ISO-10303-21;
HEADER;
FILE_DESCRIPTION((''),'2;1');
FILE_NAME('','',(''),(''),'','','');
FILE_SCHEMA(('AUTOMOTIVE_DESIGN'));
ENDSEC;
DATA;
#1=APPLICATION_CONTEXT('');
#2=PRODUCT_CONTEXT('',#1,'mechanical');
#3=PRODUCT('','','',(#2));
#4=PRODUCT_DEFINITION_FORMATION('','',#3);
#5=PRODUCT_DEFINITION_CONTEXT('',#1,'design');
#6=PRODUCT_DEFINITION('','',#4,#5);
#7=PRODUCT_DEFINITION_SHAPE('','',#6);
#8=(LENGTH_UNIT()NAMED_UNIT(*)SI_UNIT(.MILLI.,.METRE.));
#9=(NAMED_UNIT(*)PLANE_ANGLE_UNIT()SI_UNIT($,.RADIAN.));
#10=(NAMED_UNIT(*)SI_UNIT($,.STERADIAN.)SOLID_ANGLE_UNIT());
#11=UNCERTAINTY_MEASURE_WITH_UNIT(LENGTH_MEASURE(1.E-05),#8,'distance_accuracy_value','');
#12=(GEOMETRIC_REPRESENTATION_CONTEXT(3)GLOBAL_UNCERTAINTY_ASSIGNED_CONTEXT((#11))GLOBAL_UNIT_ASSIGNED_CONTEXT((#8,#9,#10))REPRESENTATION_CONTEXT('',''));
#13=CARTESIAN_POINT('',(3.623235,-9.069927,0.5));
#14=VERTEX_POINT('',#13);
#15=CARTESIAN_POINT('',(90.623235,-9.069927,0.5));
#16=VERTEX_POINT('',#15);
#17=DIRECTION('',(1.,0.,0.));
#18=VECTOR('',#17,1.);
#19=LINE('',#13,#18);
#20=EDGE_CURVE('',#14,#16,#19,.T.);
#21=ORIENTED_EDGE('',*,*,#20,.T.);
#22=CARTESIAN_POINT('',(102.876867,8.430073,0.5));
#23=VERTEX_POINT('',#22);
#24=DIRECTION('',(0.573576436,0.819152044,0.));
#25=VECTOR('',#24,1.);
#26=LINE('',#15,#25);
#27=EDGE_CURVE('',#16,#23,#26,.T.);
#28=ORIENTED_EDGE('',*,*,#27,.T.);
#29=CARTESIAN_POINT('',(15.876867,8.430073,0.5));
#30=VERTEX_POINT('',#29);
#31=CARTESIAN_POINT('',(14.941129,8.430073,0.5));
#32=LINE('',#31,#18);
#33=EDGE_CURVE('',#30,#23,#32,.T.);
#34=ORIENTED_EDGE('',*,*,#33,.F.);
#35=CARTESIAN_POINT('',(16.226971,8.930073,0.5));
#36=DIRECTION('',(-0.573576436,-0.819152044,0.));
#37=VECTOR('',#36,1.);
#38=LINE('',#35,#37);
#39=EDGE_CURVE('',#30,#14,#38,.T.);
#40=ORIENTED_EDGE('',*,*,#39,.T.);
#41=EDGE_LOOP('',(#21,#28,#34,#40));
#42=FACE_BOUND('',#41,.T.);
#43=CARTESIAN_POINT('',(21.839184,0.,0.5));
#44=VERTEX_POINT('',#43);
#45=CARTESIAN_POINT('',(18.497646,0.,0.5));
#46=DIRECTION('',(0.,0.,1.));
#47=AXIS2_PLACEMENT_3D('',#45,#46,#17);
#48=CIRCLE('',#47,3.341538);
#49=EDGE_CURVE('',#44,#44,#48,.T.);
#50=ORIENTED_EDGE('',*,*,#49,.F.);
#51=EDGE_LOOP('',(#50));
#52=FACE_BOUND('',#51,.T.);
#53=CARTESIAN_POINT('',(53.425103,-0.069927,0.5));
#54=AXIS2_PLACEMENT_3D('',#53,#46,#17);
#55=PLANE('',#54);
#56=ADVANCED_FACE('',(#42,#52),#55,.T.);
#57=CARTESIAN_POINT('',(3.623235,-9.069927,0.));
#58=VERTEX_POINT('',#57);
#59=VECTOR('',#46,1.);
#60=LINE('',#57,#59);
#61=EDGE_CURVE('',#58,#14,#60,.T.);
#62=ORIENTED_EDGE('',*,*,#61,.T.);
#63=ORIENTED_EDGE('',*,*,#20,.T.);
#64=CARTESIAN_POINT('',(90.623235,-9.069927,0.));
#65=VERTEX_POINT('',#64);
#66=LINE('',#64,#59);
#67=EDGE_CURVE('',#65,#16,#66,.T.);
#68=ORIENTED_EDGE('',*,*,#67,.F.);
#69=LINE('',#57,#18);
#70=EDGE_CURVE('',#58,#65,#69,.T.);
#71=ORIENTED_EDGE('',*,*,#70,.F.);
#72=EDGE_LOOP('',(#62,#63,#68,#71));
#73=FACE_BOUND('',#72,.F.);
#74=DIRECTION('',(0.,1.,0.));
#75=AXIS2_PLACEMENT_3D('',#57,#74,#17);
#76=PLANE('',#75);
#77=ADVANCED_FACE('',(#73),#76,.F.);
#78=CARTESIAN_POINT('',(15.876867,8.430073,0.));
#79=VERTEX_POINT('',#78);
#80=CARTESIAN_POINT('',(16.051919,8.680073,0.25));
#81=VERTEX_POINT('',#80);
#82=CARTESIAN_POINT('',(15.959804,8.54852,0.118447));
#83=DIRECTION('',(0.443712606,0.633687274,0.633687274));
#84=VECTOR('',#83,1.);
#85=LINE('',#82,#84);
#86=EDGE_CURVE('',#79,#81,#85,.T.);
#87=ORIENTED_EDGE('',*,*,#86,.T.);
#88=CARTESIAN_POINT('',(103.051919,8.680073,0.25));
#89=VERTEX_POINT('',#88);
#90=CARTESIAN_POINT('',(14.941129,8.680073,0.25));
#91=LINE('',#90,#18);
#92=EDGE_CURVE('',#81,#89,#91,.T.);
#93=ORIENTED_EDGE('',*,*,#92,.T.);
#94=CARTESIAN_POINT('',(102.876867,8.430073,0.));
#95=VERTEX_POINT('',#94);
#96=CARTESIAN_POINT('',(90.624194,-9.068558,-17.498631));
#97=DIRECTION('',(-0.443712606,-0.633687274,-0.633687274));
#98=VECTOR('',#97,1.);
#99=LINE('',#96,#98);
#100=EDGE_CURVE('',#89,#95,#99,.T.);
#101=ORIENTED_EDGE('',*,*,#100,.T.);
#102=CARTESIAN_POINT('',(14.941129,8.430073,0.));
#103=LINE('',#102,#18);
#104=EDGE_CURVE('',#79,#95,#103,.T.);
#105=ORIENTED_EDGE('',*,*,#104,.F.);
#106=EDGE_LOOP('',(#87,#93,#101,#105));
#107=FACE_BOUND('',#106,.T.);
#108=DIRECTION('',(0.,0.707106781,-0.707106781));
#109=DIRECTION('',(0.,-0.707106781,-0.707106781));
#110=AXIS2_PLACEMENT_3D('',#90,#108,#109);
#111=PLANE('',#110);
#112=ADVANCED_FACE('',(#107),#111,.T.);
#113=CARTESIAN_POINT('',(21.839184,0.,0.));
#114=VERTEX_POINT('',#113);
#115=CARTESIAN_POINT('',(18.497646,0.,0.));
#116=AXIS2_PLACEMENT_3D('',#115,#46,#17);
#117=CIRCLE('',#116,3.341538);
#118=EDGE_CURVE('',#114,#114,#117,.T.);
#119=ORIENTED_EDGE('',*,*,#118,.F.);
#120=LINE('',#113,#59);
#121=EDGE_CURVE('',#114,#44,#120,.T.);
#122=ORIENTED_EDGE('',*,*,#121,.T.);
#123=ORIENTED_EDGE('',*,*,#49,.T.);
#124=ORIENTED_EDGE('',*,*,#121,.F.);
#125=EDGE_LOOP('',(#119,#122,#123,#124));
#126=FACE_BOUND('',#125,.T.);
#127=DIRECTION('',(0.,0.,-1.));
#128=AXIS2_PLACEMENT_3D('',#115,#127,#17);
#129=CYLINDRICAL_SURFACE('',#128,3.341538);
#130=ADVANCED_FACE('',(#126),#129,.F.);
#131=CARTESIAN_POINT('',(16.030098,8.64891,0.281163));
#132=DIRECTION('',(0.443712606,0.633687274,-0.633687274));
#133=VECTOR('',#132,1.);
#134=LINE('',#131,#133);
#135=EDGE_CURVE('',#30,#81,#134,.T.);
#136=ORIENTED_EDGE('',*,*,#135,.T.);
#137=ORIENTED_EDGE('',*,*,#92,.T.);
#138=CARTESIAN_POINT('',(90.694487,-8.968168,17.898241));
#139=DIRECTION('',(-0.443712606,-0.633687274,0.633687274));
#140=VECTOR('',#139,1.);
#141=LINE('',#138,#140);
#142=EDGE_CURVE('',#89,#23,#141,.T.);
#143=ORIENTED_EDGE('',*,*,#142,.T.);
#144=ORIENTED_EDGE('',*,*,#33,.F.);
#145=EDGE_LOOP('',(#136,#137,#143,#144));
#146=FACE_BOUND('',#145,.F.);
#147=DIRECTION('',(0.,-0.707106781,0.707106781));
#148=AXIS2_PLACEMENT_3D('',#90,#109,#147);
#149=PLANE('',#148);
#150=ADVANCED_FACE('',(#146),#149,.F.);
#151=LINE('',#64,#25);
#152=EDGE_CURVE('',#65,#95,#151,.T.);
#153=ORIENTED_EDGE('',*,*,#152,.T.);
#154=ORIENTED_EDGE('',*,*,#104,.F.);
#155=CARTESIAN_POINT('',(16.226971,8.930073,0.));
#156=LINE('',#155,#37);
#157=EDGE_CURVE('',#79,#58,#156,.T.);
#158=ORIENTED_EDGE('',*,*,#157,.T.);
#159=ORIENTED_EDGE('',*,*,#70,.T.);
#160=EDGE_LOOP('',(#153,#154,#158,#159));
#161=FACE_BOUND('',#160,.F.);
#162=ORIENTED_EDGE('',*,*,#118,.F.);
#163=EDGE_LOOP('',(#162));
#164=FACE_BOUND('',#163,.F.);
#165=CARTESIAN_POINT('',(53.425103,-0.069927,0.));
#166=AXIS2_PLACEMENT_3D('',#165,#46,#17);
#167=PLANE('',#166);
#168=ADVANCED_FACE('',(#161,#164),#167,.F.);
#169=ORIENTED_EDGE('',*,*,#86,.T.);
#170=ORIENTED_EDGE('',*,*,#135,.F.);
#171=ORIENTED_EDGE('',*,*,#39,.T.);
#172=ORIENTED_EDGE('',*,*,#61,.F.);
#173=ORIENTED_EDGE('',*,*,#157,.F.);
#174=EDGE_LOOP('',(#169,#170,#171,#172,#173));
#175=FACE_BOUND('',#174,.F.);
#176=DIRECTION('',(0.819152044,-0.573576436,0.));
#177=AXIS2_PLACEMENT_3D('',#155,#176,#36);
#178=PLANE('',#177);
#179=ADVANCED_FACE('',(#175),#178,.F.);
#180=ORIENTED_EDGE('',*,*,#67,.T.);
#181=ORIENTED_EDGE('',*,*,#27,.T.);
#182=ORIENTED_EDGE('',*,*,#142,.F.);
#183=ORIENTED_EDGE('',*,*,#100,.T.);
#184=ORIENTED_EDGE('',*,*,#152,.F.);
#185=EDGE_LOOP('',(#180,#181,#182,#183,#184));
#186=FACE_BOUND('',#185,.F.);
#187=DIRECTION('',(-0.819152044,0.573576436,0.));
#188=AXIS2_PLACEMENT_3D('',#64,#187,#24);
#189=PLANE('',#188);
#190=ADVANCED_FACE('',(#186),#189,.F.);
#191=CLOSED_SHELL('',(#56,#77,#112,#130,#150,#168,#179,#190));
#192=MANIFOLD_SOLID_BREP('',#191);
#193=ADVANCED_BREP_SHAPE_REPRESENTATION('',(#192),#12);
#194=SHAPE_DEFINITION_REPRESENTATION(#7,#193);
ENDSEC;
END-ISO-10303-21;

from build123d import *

# Parameters (mm, degrees)
F0_R        = 3.341537713
F1_DEPTH    = 0.5
F2_T1_DEPTH = 89.571682988


# Not quite as in the source:
# - a fillet or chamfer that OpenCascade refuses, or shapes differently, is made with other operations: its cross-section is extruded or revolved along the edge and cut away or added


with BuildPart() as f1:
    # F0 (on Top) → F1 (new body)
    with BuildSketch(Plane.XY):
        Polygon((16.2269707607, 8.9300729632), (3.6232350729, -9.0699270368), (90.6232350729, -9.0699270368), (103.2269707607, 8.9300729632), align=None)
        with Locations((18.4976458549, 0)):
            Circle(F0_R, mode=Mode.SUBTRACT)
    extrude(amount=F1_DEPTH)

    # F2: chamfer of 0.5 on 2 edges, made by hand

    # F2_s2 → F2_t1 (cut)
    with BuildSketch(Plane.YZ.offset(14.9411292667)):
        Polygon((8.9300729632, 0), (8.4300729632, 0.5), (8.9300729632, 0.5), align=None)
        Polygon((8.9300729632, 0.5), (8.4300729632, 0), (8.9300729632, 0), align=None)
    extrude(amount=F2_T1_DEPTH, mode=Mode.SUBTRACT)


solid = f1.part
